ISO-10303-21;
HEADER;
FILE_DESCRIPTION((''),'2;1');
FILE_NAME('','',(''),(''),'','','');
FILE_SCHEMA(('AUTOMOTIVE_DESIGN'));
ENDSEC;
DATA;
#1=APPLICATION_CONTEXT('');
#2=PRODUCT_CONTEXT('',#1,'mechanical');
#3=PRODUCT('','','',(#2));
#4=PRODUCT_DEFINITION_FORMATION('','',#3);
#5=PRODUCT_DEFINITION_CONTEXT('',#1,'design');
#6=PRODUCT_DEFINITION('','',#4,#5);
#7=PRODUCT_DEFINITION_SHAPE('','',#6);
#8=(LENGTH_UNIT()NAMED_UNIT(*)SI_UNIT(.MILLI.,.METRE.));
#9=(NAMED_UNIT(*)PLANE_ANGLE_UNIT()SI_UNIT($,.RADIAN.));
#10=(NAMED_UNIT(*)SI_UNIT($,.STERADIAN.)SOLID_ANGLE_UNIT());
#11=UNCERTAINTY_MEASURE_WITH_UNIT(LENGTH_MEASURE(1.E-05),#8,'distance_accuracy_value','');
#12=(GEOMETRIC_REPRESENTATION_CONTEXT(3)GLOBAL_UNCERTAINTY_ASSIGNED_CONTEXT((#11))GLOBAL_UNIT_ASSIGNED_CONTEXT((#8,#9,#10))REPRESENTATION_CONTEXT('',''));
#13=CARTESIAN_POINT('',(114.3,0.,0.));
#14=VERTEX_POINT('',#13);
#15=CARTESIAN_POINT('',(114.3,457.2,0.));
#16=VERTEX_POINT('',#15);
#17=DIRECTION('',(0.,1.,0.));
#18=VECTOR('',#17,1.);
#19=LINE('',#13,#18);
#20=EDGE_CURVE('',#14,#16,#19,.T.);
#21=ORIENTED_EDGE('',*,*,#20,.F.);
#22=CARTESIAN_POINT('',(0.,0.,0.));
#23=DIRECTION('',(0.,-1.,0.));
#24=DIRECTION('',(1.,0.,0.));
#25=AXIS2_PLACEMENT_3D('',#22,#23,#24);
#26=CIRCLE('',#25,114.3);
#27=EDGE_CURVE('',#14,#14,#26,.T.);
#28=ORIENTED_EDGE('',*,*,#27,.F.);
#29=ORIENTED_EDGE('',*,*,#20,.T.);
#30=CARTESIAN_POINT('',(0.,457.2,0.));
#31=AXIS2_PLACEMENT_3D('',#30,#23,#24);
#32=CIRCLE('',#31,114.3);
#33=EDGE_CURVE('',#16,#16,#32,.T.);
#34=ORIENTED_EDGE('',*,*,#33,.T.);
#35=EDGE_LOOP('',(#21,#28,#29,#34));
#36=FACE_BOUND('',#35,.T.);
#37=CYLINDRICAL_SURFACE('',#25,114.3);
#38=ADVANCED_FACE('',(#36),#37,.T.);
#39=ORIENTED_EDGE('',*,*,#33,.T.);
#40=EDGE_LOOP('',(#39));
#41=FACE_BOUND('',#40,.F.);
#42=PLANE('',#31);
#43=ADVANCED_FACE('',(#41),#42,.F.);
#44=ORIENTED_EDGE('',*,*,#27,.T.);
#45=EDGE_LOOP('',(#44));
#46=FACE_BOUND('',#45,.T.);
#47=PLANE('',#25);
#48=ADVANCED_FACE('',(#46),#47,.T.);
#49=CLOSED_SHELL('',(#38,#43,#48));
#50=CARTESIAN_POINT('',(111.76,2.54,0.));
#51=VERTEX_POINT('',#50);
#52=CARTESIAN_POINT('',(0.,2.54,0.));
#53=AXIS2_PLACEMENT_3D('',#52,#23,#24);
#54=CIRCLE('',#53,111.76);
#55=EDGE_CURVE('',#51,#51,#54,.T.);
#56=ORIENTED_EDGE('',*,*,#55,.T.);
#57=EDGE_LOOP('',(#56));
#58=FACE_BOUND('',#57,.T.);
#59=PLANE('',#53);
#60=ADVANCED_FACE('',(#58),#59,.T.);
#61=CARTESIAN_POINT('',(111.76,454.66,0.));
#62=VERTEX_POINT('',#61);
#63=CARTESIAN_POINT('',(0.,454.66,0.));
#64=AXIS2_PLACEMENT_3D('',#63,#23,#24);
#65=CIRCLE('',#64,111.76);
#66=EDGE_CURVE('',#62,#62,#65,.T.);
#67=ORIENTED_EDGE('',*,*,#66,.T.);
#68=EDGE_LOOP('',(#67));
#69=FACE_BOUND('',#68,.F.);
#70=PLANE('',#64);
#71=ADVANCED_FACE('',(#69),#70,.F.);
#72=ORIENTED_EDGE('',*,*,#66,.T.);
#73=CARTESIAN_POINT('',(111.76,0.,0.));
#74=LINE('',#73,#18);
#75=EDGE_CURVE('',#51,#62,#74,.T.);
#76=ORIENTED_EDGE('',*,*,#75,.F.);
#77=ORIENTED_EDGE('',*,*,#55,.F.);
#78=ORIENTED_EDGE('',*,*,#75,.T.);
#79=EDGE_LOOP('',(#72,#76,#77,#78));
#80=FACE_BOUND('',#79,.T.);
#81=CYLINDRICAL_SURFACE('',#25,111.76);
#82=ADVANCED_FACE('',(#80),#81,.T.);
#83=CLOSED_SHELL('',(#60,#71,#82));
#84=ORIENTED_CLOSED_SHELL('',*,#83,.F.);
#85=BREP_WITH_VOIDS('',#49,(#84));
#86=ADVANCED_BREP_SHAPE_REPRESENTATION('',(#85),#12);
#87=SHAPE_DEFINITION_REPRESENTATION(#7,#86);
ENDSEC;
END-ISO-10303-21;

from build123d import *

# Parameters (mm, degrees)
F1_R     = 114.3
F2_DEPTH = 457.2
F3_T     = -2.54


# Not quite as in the source:
# - a variable given as a bare number and used for a length is read in inches; the dataset says mm whatever the document's units were


with BuildPart() as f2:
    # F1 (on Front) → F2 (new body)
    with BuildSketch(Plane.XZ):
        Circle(F1_R)
    extrude(amount=-F2_DEPTH)

    # F3 (hollow: no face is removed)
    offset(amount=F3_T, mode=Mode.SUBTRACT)


solid = f2.part
